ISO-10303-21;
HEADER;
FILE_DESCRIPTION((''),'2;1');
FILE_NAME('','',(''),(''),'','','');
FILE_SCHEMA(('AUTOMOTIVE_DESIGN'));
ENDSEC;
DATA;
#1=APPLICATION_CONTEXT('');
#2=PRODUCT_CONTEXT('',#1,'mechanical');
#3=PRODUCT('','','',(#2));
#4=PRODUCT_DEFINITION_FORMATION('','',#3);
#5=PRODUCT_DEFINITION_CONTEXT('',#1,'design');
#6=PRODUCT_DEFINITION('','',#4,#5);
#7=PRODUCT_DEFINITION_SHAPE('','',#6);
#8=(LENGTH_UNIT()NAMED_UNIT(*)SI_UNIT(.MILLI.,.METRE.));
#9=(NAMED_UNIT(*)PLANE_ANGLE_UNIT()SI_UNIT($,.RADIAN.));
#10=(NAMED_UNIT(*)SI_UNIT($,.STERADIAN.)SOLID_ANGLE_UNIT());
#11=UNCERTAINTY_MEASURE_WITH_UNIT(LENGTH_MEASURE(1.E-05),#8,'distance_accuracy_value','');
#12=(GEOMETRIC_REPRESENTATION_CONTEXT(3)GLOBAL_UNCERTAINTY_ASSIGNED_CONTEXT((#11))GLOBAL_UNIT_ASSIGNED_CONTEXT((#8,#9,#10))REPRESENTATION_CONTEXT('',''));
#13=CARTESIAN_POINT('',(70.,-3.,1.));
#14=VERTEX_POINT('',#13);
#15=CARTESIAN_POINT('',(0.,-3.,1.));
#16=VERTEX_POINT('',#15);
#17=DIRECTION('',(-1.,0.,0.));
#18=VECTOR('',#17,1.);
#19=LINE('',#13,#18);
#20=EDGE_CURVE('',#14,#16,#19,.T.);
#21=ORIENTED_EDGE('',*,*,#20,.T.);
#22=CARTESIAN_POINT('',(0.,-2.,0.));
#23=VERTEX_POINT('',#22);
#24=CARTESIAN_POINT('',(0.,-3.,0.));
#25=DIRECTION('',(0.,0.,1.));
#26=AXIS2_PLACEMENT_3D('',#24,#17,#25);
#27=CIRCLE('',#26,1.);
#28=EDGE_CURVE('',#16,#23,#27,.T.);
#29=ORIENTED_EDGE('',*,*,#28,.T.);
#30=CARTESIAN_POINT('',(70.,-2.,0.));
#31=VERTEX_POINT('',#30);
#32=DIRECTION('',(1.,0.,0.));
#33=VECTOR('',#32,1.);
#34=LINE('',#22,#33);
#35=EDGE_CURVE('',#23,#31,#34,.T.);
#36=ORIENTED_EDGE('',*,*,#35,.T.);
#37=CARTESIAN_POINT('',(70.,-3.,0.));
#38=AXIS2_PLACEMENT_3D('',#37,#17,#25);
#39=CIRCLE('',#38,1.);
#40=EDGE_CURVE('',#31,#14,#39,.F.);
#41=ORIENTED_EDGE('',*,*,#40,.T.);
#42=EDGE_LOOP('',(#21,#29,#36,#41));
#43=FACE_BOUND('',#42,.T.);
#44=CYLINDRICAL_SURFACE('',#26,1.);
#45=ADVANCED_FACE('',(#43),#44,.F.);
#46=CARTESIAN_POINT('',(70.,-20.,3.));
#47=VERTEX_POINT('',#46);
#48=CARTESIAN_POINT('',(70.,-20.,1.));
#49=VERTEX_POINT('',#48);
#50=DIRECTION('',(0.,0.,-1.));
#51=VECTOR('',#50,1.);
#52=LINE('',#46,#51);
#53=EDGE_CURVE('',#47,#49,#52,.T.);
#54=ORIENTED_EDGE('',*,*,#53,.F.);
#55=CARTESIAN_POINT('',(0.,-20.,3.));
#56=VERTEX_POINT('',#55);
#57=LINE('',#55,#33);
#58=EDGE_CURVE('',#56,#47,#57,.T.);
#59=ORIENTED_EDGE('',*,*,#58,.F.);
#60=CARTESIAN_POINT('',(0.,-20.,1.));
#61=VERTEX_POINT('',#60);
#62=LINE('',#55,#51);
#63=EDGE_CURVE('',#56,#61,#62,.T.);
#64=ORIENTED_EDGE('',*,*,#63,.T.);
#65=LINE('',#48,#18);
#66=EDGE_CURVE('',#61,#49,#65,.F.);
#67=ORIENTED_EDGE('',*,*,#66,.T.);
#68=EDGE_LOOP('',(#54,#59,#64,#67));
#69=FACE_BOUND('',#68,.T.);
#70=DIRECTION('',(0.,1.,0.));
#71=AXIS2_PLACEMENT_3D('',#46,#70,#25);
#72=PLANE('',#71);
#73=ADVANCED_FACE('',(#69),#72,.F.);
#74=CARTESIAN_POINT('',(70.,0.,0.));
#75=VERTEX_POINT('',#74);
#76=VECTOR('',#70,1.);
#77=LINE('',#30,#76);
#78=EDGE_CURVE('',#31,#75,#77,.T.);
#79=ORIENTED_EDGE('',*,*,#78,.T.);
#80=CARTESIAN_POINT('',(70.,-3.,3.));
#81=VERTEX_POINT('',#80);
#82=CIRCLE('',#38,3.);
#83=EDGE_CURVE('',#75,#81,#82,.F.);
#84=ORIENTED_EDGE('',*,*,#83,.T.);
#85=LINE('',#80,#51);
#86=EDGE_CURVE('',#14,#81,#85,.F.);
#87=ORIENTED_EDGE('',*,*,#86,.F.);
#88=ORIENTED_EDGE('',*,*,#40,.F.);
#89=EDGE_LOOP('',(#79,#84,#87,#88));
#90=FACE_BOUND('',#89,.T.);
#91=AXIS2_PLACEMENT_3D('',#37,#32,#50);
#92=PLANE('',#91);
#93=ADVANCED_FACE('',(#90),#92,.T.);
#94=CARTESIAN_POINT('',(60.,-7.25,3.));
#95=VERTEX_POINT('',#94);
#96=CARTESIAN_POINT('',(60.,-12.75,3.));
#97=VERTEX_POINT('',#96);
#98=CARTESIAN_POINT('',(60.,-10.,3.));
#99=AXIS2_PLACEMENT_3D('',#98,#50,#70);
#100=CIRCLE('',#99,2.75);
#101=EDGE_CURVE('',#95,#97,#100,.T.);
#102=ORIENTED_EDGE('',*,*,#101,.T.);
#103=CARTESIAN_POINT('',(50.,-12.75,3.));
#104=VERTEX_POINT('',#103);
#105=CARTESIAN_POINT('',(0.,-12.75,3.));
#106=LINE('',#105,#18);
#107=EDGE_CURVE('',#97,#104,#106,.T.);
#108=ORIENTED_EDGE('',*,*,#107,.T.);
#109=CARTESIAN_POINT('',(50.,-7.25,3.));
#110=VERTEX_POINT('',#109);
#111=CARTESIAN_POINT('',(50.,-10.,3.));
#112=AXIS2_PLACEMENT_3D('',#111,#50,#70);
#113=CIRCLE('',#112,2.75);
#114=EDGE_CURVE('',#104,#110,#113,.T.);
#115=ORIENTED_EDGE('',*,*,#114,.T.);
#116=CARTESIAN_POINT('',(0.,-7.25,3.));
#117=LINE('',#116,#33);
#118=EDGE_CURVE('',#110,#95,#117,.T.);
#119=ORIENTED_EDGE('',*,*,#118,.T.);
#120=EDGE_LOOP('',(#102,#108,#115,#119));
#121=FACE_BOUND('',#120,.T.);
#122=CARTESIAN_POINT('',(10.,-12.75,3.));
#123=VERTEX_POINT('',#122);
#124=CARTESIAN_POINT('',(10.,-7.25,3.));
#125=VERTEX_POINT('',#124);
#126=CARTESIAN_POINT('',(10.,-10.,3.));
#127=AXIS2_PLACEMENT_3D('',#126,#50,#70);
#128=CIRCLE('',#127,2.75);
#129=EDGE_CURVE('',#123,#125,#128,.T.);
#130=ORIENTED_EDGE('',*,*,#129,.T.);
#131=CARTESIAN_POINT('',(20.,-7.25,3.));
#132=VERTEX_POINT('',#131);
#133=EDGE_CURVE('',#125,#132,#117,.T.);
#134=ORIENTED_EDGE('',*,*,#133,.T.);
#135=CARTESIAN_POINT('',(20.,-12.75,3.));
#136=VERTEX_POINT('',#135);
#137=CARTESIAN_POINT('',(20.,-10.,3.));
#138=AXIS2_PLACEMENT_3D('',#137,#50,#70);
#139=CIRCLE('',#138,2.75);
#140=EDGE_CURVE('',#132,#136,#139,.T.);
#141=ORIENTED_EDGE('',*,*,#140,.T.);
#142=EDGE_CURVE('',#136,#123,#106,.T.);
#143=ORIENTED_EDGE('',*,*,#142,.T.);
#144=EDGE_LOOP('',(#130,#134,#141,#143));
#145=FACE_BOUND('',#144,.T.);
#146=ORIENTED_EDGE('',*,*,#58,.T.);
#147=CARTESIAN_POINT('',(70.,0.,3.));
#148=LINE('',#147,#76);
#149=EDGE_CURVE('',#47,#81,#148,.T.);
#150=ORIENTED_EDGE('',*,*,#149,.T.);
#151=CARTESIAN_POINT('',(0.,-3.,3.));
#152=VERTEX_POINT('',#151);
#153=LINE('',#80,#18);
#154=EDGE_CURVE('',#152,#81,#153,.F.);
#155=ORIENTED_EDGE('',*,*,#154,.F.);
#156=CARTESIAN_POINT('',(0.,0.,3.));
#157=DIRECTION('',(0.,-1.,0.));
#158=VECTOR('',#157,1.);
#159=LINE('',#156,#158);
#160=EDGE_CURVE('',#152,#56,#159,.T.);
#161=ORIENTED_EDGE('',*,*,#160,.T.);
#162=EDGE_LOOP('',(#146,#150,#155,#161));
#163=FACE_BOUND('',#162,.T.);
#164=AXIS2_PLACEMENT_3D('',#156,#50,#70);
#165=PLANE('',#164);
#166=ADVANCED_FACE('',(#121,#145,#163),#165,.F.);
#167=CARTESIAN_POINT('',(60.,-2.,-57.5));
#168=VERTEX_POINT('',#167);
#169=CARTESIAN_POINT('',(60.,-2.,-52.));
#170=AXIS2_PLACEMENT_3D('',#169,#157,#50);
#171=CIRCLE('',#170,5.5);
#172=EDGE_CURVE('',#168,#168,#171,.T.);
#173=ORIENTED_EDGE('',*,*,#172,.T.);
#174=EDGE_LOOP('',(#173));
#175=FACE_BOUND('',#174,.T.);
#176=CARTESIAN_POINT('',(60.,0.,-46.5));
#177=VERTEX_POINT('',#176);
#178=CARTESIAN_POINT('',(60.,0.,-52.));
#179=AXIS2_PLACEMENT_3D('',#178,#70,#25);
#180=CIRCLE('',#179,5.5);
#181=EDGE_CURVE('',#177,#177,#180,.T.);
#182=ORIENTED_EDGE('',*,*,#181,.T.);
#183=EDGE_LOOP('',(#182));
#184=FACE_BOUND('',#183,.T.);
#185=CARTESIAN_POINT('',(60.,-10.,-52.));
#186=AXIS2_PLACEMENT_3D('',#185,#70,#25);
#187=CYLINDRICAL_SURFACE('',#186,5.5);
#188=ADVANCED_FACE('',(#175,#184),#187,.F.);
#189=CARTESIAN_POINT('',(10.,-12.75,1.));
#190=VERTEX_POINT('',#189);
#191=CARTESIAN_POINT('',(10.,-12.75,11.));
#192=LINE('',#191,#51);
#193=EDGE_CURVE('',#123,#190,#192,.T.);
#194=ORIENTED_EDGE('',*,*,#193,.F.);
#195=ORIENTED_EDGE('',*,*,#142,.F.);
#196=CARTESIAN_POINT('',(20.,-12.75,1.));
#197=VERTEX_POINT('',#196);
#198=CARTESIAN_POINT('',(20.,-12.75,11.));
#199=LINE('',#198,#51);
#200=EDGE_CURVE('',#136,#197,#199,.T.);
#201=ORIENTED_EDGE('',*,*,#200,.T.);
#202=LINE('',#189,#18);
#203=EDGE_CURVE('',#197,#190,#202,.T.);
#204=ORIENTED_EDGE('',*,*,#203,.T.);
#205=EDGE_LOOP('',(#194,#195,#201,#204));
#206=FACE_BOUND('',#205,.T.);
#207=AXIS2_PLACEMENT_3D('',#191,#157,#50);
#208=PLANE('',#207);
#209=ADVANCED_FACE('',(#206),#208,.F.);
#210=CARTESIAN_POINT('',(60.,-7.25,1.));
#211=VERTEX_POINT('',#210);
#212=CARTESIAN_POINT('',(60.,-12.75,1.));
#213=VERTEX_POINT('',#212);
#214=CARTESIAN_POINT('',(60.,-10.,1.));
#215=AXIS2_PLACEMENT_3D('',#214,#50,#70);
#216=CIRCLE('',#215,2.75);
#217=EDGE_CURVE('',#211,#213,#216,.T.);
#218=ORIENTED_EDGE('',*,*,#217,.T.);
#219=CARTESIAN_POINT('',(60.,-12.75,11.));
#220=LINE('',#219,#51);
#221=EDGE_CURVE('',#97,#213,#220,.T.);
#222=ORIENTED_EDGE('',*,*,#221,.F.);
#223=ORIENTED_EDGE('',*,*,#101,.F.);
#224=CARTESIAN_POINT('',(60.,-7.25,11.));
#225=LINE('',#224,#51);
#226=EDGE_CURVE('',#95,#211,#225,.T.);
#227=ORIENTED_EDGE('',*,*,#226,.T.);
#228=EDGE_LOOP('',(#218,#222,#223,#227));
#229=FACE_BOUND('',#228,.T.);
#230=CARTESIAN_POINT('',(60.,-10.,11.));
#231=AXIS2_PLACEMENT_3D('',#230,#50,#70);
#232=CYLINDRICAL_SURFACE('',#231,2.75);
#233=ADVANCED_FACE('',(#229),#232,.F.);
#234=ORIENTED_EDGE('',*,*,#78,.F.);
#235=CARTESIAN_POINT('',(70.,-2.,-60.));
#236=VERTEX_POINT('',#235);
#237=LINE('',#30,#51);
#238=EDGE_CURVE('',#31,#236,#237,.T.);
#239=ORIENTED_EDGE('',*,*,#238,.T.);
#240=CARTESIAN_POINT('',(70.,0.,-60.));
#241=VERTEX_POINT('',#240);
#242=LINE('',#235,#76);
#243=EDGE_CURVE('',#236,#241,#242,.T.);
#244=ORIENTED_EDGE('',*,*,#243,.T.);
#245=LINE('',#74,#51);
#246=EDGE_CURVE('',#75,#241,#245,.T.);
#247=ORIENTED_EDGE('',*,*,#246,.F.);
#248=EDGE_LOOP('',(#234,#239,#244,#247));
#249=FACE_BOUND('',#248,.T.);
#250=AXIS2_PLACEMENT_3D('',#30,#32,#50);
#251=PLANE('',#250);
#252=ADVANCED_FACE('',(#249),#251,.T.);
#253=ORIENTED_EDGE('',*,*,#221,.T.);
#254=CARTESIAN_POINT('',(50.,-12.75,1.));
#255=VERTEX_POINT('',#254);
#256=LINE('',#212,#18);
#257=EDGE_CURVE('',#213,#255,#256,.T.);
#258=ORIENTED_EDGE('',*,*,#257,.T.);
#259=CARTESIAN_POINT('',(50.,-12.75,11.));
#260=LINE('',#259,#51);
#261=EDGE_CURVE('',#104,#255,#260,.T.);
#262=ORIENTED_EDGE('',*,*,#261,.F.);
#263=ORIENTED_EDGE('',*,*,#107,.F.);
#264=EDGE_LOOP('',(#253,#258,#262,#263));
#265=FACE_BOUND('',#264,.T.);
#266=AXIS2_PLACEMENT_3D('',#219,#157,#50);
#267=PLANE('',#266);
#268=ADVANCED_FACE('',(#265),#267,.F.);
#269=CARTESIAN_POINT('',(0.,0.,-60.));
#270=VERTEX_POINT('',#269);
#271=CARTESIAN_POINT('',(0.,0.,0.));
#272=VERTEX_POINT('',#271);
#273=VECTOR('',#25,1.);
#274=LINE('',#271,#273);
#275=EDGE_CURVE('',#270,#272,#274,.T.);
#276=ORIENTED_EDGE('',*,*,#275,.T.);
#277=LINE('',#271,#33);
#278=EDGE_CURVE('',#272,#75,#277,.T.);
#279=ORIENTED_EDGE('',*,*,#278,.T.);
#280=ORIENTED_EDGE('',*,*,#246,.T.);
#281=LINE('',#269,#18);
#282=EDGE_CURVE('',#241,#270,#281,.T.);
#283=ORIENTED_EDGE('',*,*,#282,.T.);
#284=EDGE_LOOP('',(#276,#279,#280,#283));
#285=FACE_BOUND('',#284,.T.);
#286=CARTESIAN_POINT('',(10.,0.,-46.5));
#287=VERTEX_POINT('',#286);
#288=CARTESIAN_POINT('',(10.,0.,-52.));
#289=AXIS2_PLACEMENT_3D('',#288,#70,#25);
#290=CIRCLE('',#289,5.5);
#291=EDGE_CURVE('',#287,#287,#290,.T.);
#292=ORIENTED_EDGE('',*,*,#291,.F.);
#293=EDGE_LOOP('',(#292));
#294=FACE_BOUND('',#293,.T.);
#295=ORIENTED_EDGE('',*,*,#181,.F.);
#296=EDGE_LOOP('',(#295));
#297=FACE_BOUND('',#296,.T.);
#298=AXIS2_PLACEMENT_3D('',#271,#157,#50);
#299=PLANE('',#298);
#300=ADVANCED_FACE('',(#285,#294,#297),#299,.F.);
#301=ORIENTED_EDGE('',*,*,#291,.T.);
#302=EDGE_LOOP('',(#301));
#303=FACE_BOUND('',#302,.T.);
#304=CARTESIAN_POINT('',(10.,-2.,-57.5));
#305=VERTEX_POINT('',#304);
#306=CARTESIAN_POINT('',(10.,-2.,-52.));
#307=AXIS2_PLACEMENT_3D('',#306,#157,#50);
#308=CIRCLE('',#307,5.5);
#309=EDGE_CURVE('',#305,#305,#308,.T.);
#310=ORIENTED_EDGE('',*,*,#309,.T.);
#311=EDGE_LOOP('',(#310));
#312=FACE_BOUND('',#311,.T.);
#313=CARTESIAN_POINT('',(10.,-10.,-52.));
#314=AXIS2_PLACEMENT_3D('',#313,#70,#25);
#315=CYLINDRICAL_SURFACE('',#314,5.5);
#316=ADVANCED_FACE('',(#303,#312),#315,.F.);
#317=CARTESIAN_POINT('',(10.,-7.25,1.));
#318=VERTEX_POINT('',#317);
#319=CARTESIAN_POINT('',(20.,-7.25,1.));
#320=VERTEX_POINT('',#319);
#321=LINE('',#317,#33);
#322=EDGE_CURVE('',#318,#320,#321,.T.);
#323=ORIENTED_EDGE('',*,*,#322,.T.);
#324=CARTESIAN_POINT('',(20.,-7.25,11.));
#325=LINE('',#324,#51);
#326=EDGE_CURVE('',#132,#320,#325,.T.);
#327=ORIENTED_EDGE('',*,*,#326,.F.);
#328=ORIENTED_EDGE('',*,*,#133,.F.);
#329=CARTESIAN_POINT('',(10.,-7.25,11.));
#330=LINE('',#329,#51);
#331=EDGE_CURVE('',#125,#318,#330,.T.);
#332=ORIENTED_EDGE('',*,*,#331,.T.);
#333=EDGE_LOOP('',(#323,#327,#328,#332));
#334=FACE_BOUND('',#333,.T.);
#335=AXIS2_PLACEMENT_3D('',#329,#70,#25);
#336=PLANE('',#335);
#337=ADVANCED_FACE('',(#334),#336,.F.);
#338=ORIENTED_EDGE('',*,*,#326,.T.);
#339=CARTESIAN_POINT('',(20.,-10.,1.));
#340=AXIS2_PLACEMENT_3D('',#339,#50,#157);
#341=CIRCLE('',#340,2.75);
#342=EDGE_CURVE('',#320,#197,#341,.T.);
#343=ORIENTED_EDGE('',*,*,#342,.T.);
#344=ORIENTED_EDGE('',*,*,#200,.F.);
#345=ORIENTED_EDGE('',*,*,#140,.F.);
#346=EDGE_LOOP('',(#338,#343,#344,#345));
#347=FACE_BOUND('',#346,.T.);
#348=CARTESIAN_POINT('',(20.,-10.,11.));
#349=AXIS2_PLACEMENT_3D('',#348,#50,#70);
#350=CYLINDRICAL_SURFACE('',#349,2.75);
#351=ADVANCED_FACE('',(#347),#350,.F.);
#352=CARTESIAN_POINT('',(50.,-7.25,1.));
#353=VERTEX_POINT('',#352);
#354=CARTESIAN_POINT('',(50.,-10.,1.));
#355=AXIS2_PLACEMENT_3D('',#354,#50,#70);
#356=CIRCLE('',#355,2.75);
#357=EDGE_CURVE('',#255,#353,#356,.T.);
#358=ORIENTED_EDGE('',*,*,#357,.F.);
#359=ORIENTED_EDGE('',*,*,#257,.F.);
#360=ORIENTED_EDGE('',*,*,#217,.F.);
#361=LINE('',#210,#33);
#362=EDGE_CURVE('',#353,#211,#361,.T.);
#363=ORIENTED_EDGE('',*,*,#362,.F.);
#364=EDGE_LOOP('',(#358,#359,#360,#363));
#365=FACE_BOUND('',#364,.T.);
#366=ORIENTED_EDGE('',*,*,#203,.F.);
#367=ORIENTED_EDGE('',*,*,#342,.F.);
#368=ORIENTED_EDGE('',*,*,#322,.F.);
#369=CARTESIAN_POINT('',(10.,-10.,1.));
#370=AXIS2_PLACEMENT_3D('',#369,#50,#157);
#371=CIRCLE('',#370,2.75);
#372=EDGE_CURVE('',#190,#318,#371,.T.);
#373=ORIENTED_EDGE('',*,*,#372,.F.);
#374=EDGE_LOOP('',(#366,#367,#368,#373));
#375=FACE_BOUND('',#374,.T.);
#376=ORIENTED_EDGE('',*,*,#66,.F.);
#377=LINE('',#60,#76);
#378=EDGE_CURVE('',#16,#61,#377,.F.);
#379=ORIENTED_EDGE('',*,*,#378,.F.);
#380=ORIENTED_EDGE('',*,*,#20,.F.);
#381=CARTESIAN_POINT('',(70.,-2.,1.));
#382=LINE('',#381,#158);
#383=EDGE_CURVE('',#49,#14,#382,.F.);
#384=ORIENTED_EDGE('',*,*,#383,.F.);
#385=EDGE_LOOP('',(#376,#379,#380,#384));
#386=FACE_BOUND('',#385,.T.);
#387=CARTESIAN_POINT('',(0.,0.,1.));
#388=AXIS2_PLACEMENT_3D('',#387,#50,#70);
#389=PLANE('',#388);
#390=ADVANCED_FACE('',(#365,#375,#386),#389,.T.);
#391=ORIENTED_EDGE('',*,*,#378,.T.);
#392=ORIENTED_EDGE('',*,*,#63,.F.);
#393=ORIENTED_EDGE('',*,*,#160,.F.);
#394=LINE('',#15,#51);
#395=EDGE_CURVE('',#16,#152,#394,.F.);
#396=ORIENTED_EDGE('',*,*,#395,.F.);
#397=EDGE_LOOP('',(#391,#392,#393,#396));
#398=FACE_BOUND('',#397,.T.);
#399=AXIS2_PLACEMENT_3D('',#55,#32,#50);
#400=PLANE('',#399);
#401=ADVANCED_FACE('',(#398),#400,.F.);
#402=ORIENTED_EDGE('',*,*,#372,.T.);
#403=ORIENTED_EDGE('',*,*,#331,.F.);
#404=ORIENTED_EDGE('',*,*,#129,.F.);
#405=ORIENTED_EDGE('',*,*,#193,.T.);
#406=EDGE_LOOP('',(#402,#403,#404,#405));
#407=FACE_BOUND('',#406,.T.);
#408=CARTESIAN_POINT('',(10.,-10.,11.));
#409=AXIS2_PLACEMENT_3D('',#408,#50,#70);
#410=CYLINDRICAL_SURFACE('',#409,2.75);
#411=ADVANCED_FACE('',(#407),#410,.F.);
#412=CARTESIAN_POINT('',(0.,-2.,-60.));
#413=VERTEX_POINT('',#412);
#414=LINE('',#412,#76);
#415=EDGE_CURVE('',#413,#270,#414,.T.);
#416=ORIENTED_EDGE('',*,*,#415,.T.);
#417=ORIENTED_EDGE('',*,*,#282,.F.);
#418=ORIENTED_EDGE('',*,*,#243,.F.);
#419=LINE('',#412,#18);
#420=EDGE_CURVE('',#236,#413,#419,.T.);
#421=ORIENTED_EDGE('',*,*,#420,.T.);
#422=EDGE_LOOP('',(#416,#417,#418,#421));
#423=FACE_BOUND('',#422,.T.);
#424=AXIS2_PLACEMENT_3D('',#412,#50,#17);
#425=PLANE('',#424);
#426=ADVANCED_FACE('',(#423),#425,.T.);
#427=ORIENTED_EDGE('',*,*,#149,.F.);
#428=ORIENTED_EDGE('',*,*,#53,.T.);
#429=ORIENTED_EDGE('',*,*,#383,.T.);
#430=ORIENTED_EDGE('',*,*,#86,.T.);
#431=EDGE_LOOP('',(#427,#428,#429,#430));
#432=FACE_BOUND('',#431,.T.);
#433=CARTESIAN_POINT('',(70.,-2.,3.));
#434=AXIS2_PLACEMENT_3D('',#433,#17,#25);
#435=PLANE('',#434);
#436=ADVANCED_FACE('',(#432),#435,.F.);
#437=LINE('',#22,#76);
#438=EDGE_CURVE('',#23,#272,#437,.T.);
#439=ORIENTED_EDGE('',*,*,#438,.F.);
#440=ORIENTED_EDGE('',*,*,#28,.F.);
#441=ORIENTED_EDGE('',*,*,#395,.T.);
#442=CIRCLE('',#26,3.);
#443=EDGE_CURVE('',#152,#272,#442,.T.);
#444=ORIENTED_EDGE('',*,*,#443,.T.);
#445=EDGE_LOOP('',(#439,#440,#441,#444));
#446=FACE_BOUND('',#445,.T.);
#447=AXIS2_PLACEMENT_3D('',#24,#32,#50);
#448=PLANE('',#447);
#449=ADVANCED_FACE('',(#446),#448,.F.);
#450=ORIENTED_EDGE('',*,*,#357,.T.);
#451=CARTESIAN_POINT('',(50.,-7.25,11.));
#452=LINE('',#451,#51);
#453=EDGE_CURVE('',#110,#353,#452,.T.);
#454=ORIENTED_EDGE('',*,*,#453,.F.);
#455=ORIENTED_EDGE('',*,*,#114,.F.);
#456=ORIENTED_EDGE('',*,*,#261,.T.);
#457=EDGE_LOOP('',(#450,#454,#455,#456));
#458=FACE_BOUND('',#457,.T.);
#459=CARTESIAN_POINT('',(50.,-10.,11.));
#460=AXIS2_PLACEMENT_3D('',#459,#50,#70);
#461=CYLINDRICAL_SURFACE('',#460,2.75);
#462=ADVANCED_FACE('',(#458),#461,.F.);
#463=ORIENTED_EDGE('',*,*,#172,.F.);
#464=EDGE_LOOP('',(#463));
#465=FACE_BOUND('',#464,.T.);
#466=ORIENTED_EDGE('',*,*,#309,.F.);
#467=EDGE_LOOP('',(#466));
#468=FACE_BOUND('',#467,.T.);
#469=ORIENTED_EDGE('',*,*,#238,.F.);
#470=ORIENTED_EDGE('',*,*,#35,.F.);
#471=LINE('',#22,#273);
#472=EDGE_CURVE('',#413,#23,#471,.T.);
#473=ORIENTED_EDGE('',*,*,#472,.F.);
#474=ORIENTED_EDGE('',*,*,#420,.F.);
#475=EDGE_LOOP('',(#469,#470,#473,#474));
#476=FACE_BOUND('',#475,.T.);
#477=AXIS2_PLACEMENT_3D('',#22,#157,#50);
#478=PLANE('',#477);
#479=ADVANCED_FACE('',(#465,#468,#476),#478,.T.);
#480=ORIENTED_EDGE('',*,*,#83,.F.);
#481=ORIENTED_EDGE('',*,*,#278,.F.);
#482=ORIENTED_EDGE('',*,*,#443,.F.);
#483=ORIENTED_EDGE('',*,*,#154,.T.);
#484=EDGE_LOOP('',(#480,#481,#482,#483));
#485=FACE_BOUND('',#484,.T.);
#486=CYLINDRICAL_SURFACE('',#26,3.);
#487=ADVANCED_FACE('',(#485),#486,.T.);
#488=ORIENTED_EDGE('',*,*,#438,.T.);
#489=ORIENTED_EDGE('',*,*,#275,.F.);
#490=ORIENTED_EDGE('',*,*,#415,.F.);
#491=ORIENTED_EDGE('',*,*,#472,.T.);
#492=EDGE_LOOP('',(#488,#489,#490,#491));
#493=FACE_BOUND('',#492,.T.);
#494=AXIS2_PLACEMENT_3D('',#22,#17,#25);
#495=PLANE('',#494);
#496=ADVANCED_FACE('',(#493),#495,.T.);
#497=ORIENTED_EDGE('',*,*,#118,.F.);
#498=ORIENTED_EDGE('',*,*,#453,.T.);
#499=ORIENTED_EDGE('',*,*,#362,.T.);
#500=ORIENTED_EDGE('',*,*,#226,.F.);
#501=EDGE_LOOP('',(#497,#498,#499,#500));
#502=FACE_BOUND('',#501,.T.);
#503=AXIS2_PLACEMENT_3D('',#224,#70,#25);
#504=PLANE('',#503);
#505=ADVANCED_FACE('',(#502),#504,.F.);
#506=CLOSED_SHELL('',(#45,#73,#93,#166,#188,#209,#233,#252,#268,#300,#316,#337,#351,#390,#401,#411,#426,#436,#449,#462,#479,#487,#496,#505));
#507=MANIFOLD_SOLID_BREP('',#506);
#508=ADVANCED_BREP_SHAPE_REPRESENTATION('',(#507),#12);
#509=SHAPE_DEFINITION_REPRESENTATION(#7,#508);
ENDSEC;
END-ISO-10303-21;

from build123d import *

# Parameters (mm, degrees)
SKETCH_1_W             = 70
SKETCH_1_H             = 60
SM_BASE_FLANGE_1_DEPTH = 2
SM_EDGE_FLANGE_1_DEPTH = 70
CUT_EXTRUDE_1_DEPTH    = 10
SKETCH_13_R            = 5.5
CUT_EXTRUDE_2_DEPTH    = 10


# Sheet-metal steps are written as plain solids
with BuildPart() as part:
    # Sketch 1 → 基体-法兰1 (new body)
    with BuildSketch(Plane(origin=(0, 0, 0), x_dir=(1, 0, 0), z_dir=(0, 1, 0))):
        with Locations((35, 30)):
            Rectangle(SKETCH_1_W, SKETCH_1_H)
    extrude(amount=-SM_BASE_FLANGE_1_DEPTH)

    # 边线-法兰1 section (across the edge) → 边线-法兰1 (add)
    with BuildSketch(Plane(origin=(70, -2, 1), x_dir=(0, 0, -1), z_dir=(-1, 0, 0))):
        with BuildLine():
            Line((-2, 1), (-2, 18))
            Line((-2, 18), (0, 18))
            Line((0, 18), (0, 1))
            ThreePointArc((0, 1), (0.292893219, 0.292893219), (1, 0))
            Line((1, 0), (1, -2))
            ThreePointArc((1, -2), (-1.121320344, -1.121320344), (-2, 1))
        make_face()
    extrude(amount=SM_EDGE_FLANGE_1_DEPTH)

    # 草图12 → 切除-拉伸1 (cut)
    with BuildSketch(Plane(origin=(0, 0, 1), x_dir=(-1, 0, 0), z_dir=(0, 0, -1))):
        with BuildLine():
            Line((-60, -7.25), (-50, -7.25))
            ThreePointArc((-50, -7.25), (-47.25, -10), (-50, -12.75))
            Line((-50, -12.75), (-60, -12.75))
            ThreePointArc((-60, -12.75), (-62.75, -10), (-60, -7.25))
        make_face()
        with BuildLine():
            Line((-10, -7.25), (-20, -7.25))
            ThreePointArc((-20, -7.25), (-22.75, -10), (-20, -12.75))
            Line((-20, -12.75), (-10, -12.75))
            ThreePointArc((-10, -12.75), (-7.25, -10), (-10, -7.25))
        make_face()
    extrude(amount=-CUT_EXTRUDE_1_DEPTH, mode=Mode.SUBTRACT)

    # 草图13 → 切除-拉伸2 (cut)
    with BuildSketch(Plane(origin=(0, 0, 0), x_dir=(1, 0, 0), z_dir=(0, 1, 0))):
        with Locations(Location((10, 52, 0), (0, 0, 270))):
            Circle(SKETCH_13_R)
        with Locations(Location((60, 52, 0), (0, 0, 270))):
            Circle(SKETCH_13_R)
    extrude(amount=-CUT_EXTRUDE_2_DEPTH, mode=Mode.SUBTRACT)


solid = part.part
